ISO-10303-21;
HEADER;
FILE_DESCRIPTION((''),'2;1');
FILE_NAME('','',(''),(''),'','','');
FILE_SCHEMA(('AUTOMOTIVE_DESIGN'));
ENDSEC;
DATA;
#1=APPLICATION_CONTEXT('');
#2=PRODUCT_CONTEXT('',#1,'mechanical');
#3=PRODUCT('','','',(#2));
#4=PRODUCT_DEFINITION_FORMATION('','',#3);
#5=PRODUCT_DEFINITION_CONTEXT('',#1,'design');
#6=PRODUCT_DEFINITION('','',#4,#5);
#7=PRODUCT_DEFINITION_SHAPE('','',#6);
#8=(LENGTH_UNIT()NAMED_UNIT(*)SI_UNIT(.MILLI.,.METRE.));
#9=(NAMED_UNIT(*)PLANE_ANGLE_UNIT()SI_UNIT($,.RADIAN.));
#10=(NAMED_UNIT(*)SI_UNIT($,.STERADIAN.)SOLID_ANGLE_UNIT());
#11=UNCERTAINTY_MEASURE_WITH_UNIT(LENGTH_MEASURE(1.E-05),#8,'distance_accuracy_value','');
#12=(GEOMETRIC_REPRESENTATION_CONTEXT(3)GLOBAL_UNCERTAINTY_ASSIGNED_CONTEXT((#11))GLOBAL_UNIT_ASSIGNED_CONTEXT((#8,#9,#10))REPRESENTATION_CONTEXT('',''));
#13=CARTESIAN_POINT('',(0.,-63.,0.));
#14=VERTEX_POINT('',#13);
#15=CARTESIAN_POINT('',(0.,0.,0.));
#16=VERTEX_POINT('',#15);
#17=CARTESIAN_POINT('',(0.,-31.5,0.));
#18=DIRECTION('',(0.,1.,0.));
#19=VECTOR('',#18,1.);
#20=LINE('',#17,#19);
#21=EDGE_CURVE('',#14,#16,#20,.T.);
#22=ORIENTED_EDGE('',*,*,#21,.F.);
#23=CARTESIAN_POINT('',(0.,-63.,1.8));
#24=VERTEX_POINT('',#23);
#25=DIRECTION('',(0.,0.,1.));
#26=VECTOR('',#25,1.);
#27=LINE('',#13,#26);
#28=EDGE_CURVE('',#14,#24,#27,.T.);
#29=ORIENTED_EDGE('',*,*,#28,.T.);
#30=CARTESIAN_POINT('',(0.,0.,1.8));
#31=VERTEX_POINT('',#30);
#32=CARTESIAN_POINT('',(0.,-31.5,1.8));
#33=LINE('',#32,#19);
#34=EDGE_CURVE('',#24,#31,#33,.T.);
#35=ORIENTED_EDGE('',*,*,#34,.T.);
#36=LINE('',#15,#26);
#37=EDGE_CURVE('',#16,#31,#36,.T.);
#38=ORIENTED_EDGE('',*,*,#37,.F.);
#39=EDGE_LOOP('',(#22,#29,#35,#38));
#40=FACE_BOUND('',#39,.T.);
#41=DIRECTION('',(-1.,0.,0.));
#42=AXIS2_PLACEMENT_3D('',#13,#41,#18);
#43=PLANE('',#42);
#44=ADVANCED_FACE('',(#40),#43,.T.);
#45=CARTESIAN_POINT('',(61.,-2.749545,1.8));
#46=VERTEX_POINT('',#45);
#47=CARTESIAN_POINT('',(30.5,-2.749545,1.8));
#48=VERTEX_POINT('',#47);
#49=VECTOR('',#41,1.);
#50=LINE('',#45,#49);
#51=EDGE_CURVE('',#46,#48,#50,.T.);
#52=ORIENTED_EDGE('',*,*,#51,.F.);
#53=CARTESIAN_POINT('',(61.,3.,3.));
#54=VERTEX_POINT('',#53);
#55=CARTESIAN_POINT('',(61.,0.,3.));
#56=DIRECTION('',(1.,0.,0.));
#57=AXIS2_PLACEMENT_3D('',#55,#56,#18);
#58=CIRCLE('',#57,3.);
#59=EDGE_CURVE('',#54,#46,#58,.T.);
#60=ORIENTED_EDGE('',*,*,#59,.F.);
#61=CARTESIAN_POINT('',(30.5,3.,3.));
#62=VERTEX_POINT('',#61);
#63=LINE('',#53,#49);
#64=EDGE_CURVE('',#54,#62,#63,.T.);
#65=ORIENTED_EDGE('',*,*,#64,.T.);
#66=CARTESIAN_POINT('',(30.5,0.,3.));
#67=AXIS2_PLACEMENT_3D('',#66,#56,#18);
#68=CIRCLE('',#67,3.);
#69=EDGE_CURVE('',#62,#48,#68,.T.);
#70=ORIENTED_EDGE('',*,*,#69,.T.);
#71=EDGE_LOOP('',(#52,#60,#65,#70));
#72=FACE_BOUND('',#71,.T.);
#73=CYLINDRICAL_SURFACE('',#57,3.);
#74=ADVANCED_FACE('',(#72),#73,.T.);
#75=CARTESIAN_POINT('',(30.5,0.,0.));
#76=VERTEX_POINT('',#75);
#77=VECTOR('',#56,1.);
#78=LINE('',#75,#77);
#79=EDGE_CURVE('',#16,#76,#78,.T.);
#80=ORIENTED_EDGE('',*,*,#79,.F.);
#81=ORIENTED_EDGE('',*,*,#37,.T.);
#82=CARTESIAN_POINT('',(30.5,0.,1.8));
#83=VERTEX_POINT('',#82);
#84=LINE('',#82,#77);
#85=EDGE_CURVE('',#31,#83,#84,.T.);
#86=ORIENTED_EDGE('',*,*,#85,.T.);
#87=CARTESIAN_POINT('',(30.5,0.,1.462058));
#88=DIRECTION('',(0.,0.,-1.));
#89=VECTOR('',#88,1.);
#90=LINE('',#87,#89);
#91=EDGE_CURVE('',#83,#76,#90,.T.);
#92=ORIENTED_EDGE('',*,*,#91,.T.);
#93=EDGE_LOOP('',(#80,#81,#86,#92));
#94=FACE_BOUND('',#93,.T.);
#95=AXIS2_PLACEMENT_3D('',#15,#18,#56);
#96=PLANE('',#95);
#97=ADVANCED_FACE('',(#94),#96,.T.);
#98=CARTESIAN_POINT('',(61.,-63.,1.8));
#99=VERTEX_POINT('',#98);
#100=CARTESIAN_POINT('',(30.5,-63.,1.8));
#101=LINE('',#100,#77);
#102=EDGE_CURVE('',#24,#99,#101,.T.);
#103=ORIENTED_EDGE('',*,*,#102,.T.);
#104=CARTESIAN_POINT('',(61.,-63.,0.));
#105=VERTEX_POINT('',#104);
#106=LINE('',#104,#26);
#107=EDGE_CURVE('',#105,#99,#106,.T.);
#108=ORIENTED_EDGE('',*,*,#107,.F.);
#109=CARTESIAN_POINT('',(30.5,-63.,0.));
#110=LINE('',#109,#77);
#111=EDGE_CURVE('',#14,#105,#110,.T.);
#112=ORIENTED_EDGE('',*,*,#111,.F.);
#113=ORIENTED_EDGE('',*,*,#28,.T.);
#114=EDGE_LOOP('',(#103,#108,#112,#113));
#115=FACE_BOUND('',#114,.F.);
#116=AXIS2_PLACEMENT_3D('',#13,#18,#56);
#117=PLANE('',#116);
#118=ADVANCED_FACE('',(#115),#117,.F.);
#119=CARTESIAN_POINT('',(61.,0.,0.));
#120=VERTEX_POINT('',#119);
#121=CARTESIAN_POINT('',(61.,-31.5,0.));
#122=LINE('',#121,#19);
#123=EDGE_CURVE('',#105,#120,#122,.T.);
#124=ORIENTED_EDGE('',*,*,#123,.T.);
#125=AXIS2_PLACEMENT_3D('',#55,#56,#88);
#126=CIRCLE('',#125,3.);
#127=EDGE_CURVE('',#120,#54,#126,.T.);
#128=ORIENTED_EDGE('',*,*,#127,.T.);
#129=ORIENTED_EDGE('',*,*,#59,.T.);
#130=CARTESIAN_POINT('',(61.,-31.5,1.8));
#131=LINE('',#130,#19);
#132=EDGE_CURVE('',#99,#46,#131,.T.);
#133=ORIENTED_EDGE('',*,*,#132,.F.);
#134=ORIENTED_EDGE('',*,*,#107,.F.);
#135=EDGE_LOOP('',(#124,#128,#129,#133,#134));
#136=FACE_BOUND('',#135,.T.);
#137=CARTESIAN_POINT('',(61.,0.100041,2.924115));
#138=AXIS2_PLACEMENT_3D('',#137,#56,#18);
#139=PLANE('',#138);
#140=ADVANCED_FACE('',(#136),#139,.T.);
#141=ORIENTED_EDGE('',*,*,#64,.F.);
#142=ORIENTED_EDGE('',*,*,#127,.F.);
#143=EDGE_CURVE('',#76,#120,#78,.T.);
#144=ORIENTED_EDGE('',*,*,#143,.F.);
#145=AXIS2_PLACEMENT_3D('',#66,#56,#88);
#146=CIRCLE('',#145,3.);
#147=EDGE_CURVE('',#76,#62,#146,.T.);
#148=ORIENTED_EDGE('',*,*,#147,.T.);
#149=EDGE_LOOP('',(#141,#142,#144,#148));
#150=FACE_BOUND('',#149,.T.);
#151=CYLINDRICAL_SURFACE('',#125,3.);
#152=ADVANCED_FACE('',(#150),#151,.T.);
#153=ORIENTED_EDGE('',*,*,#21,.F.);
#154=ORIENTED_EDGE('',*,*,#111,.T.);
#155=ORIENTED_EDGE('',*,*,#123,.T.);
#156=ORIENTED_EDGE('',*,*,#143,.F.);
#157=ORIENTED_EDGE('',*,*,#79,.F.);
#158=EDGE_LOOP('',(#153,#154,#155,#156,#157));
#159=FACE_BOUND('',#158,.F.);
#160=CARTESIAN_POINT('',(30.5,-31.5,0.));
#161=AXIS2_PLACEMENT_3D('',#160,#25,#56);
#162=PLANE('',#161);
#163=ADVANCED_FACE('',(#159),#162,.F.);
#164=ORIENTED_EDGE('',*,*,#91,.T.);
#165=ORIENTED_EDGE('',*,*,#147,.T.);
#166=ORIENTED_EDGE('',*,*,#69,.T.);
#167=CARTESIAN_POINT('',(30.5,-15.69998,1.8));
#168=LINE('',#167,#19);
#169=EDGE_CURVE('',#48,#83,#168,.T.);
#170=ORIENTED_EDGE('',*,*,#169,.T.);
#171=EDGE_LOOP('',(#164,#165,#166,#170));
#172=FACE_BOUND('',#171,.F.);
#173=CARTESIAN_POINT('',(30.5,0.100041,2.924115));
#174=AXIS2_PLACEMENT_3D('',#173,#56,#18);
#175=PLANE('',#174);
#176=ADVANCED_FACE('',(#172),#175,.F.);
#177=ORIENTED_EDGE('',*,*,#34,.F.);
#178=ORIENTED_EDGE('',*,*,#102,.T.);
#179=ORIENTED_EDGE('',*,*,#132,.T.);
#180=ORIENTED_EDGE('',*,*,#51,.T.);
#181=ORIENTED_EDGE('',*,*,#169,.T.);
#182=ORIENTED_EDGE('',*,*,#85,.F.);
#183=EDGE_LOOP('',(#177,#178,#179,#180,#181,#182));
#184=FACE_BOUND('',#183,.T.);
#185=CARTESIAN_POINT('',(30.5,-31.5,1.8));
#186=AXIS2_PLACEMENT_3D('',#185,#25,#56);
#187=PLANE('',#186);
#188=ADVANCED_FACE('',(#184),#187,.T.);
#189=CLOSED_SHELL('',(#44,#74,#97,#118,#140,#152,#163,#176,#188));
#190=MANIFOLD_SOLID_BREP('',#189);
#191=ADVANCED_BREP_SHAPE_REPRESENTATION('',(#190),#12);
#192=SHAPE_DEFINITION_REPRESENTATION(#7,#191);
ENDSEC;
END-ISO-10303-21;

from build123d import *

# Parameters (mm, degrees)
F0_W     = 61
F0_H     = 63
F1_DEPTH = 1.8
F3_DEPTH = 30.5


with BuildPart() as f1:
    # F0 (on Top) → F1 (new body)
    with BuildSketch(Plane.XY):
        with Locations((30.5, -31.5)):
            Rectangle(F0_W, F0_H)
    extrude(amount=F1_DEPTH)

    # F2 (on face) → F3 (join)
    with BuildSketch(Plane.YZ.offset(61)):
        with BuildLine():
            Line((0, 1.8), (0, 0))
            ThreePointArc((0, 0), (2.1213203436, 0.8786796564), (3, 3))
            ThreePointArc((3, 3), (-0.6129289311, 5.9367189388), (-2.749545417, 1.8))
            Line((-2.749545417, 1.8), (0, 1.8))
        make_face()
        with BuildLine():
            ThreePointArc((-2.749545417, 1.8), (-1.6431676725, 0.4900199204), (0, 0))
            Line((0, 0), (0, 1.8))
            Line((0, 1.8), (-2.749545417, 1.8))
        make_face()
    extrude(amount=-F3_DEPTH)


solid = f1.part
